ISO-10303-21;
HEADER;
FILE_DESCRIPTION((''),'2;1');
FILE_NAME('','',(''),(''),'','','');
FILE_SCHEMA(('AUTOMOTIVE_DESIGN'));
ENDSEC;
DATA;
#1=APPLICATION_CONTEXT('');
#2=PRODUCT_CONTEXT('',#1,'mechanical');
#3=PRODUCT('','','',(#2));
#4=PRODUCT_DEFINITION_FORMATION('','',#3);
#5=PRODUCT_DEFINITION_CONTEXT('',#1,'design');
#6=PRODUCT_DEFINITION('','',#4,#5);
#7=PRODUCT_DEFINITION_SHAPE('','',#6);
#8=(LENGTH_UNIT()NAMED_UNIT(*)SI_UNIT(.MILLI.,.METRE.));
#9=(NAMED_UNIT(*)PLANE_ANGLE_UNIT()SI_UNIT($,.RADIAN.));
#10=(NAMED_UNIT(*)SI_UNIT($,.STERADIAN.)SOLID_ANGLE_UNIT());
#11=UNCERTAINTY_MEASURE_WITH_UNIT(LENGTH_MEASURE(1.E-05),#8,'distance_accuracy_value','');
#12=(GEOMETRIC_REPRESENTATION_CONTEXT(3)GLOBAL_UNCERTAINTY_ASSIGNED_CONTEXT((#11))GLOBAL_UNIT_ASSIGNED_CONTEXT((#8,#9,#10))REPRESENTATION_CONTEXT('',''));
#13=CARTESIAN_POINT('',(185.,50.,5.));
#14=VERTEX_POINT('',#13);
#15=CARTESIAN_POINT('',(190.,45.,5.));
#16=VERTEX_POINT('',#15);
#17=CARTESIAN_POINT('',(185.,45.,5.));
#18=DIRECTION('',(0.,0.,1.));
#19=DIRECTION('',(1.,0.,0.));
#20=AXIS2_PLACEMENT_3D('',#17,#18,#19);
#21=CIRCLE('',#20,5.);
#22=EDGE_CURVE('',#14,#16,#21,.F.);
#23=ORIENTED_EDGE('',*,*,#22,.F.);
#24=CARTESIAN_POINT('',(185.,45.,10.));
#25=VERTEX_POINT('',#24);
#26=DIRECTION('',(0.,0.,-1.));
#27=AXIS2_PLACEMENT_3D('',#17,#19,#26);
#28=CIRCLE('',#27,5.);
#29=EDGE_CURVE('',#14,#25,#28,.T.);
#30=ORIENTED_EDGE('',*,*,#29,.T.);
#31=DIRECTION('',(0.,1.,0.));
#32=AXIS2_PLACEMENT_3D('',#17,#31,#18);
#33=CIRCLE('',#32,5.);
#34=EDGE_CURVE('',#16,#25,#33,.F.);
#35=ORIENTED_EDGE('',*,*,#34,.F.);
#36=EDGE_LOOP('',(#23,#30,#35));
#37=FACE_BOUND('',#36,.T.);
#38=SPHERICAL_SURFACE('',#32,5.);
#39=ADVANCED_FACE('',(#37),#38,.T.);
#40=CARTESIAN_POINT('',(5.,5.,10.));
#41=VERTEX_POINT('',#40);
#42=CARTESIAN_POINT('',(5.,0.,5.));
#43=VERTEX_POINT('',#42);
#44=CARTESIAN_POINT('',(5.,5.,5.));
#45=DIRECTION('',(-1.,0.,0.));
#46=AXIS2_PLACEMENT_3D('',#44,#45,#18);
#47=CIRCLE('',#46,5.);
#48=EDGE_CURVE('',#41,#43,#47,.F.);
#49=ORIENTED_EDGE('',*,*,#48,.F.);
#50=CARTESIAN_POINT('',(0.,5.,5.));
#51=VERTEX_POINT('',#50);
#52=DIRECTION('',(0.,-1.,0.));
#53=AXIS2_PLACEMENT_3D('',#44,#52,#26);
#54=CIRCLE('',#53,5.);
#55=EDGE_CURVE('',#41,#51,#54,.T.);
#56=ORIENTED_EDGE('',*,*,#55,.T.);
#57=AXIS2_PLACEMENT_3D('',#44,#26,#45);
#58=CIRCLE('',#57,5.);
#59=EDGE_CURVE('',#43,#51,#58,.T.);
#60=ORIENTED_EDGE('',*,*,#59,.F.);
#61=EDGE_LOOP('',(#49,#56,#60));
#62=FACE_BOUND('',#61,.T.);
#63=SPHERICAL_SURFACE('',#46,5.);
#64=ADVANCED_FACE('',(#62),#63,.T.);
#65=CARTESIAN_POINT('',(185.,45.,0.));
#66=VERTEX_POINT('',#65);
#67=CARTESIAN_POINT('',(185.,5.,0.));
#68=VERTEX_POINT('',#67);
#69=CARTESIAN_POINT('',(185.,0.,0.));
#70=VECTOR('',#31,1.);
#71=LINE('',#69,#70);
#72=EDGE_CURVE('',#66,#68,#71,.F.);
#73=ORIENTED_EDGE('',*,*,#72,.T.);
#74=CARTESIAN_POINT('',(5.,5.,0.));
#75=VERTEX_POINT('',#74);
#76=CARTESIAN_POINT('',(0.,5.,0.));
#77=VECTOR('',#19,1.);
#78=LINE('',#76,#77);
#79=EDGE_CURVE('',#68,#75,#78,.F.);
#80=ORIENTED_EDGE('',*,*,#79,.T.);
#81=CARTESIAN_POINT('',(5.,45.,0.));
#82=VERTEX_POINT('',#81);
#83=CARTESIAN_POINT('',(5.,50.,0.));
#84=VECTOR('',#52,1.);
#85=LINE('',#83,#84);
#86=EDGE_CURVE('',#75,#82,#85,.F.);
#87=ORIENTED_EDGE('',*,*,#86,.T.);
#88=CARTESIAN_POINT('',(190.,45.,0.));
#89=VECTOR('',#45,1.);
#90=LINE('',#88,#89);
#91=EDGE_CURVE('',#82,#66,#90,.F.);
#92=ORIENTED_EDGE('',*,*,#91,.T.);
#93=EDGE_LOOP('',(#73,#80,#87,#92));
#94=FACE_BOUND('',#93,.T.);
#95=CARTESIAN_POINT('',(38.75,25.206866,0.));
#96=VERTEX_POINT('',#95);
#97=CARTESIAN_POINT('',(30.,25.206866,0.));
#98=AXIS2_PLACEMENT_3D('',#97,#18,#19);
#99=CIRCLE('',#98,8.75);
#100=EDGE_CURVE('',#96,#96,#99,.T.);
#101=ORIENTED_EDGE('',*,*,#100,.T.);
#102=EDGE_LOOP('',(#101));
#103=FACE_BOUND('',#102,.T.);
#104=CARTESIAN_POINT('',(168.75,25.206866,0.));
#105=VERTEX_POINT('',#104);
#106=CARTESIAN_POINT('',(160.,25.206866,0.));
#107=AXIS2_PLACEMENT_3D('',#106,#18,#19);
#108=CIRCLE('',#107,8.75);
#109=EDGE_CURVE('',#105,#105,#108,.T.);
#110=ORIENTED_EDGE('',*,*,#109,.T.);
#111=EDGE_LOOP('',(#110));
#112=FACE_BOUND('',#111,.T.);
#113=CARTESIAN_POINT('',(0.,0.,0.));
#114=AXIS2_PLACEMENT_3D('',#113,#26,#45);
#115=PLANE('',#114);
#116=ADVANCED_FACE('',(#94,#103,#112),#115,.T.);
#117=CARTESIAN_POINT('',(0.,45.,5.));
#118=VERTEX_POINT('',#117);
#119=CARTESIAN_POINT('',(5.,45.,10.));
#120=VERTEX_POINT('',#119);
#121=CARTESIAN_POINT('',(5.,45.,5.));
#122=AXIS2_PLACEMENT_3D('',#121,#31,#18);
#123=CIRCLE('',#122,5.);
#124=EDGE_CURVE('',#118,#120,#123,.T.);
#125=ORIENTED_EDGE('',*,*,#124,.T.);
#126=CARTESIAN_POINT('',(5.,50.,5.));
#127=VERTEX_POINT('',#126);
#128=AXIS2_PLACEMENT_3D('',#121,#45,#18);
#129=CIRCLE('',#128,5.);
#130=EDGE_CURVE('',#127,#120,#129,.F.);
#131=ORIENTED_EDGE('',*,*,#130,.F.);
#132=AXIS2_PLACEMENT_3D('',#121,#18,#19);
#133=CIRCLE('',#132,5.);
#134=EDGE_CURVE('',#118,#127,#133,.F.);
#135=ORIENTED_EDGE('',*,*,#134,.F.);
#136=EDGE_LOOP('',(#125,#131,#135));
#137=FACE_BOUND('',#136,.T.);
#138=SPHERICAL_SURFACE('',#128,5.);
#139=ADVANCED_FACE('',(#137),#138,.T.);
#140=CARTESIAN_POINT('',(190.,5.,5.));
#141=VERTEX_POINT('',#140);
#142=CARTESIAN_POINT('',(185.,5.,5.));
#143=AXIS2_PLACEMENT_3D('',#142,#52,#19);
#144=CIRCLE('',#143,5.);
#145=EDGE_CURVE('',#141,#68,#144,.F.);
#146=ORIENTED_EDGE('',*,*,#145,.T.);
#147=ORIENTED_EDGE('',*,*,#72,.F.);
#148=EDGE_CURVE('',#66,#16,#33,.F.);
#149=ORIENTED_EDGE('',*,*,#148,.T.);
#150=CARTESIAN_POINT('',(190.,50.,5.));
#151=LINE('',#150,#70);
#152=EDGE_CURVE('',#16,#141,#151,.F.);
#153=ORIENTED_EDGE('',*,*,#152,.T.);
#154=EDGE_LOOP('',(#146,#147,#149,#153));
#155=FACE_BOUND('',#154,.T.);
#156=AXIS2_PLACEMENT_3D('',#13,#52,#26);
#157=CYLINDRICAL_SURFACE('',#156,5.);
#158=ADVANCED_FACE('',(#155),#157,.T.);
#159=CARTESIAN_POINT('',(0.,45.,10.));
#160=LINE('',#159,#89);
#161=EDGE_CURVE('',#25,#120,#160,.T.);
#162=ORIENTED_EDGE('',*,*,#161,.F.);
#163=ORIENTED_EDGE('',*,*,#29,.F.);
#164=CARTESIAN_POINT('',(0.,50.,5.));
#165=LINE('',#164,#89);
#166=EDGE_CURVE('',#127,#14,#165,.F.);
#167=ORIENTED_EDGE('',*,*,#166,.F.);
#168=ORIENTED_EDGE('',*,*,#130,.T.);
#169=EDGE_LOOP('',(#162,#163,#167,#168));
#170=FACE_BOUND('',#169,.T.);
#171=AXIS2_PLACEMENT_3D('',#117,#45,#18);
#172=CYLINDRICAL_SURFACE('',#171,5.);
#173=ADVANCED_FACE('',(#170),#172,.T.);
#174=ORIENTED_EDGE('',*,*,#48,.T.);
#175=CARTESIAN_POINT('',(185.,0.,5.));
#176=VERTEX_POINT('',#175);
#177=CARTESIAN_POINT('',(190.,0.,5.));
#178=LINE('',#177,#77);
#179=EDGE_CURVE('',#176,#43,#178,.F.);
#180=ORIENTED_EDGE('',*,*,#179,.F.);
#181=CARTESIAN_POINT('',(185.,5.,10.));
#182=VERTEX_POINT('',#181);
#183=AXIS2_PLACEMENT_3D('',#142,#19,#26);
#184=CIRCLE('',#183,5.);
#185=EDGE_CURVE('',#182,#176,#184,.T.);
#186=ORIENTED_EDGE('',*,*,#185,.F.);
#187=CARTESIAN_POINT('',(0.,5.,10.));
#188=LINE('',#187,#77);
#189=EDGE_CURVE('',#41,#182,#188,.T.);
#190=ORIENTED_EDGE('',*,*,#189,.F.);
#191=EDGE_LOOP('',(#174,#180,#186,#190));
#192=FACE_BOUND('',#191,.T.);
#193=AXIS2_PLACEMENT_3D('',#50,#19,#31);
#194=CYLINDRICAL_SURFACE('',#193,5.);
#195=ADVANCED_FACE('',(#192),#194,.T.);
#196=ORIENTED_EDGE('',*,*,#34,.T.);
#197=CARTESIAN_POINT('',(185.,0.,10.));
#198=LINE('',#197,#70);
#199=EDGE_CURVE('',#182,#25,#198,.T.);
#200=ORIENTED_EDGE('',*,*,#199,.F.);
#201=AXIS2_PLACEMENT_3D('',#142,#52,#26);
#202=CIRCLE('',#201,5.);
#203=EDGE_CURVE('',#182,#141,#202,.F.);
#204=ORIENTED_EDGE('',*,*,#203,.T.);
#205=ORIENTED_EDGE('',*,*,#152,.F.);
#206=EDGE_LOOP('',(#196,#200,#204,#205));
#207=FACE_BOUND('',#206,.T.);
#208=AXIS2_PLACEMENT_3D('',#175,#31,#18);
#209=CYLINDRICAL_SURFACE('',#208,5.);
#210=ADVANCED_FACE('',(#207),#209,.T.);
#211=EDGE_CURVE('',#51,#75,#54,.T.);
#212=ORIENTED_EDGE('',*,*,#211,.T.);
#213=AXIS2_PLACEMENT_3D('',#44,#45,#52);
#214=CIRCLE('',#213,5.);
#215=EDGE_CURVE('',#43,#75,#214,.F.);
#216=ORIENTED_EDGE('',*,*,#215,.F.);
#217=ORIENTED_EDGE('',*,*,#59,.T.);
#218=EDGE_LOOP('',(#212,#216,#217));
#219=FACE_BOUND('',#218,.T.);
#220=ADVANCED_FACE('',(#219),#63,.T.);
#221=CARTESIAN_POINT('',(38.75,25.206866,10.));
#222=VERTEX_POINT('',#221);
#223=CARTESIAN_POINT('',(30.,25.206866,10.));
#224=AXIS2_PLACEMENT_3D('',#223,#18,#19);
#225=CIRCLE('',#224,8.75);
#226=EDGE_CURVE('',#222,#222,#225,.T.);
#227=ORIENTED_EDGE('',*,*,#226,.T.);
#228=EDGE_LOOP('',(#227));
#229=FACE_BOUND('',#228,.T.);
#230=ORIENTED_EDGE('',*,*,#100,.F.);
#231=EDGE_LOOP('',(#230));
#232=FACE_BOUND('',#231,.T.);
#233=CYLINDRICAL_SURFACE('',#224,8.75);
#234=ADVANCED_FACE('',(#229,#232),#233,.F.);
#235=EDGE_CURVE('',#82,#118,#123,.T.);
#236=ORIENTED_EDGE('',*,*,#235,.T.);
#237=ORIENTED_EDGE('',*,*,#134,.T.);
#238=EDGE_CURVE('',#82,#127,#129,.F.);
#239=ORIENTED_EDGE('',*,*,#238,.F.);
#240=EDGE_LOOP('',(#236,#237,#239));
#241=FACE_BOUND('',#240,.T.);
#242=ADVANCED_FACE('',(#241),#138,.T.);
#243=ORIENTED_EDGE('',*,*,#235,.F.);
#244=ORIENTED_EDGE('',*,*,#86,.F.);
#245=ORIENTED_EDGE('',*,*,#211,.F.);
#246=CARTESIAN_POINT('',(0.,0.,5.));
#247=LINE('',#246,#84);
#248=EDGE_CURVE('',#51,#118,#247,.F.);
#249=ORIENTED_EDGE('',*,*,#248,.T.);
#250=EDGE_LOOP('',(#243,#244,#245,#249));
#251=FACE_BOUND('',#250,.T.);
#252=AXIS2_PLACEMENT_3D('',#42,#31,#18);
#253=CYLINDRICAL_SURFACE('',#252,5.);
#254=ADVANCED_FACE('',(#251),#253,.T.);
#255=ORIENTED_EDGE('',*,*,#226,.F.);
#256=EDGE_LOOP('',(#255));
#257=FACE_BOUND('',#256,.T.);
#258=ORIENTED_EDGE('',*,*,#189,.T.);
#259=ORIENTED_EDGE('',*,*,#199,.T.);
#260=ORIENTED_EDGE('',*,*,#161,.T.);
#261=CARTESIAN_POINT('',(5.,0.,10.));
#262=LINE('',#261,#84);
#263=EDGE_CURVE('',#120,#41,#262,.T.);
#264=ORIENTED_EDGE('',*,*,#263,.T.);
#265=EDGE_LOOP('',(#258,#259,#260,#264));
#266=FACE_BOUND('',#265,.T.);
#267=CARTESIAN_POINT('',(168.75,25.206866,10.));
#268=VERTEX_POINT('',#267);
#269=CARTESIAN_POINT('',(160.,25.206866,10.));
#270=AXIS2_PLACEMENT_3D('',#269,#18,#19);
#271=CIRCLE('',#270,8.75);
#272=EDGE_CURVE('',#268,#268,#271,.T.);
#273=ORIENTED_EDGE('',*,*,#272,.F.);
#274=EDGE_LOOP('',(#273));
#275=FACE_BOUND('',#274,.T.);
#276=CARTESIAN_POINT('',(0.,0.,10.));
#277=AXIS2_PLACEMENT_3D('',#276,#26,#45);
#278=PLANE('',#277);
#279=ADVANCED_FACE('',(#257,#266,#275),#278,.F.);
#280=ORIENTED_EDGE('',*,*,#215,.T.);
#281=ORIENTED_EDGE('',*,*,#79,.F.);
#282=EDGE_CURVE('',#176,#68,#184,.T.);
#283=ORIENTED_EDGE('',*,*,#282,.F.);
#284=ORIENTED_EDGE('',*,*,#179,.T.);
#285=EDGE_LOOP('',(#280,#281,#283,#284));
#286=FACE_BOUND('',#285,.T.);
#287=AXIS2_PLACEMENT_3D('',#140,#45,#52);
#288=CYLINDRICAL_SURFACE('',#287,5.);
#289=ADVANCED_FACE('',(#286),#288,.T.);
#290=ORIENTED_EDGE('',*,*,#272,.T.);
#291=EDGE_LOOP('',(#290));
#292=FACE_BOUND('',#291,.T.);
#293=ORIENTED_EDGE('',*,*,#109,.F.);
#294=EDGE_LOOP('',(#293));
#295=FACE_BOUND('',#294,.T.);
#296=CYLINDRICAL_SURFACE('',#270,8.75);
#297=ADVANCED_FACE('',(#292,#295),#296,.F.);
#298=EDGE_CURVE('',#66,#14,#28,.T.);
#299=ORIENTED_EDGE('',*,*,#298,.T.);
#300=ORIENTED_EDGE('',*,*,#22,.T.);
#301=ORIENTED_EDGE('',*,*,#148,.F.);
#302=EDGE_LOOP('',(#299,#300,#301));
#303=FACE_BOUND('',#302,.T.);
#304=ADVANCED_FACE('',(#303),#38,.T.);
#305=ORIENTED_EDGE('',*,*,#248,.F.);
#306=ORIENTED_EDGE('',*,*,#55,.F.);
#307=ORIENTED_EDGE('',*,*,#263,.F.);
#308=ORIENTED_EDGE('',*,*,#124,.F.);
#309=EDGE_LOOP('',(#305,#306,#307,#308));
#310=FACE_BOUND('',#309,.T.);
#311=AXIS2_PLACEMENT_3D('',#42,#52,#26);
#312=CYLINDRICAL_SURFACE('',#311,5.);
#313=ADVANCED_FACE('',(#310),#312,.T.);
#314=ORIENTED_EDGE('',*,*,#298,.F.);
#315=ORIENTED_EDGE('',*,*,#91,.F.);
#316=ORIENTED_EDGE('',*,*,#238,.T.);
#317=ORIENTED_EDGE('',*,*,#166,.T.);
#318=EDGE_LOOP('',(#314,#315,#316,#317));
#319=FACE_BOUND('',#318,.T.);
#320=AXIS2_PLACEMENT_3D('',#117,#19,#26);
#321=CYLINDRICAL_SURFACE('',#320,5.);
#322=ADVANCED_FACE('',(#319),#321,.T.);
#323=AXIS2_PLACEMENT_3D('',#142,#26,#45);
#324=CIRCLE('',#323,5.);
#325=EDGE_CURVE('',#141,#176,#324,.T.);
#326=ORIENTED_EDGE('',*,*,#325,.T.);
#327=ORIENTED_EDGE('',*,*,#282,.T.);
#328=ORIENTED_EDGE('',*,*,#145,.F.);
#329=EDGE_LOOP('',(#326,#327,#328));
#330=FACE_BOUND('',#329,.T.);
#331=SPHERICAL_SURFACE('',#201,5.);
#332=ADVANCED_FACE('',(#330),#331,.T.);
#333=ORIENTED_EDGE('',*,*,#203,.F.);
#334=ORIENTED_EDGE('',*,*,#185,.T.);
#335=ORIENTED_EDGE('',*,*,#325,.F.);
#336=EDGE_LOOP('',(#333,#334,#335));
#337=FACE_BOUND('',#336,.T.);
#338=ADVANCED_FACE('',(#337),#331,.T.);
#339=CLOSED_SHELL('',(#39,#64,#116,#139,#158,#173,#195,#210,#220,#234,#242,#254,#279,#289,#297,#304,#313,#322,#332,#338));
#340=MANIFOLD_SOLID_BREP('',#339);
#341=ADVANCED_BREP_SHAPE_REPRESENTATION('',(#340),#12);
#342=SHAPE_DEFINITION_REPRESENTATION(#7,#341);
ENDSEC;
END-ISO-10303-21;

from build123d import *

# Parameters (mm, degrees)
ESBO_O1_W                                = 190
ESBO_O1_H                                = 50
RESSALTO_EXTRUS_O1_DEPTH                 = 10
FILETE1_R                                = 5
BROCA_DE_ROSQUEAR_PARA_TARRAXA_DE_M201_D = 17.5


with BuildPart() as part:
    # Esboço1 → Ressalto-extrusão1 (new body)
    with BuildSketch(Plane.XY):
        with Locations((95, 25)):
            Rectangle(ESBO_O1_W, ESBO_O1_H)
    extrude(amount=RESSALTO_EXTRUS_O1_DEPTH)

    # Filete1
    filete1_edges = [part.edges().sort_by_distance(p)[0] for p in [
        (95, 50, 10),
        (0, 25, 10),
        (95, 0, 10),
        (0, 25, 0),
        (95, 50, 0),
        (190, 25, 0),
        (95, 0, 0),
        (0, 0, 5),
        (0, 50, 5),
        (190, 50, 5),
        (190, 0, 5),
        (190, 25, 10),
    ]]
    fillet(filete1_edges, radius=FILETE1_R - 0.0001)  # a hair under: the kernel refuses the full size

    # Broca de rosquear para tarraxa de M201 (through all)
    with Locations(Plane.XY.offset(10)):
        with Locations((30, 25.206865572), (160, 25.206865572)):
            Hole(BROCA_DE_ROSQUEAR_PARA_TARRAXA_DE_M201_D / 2)


solid = part.part
